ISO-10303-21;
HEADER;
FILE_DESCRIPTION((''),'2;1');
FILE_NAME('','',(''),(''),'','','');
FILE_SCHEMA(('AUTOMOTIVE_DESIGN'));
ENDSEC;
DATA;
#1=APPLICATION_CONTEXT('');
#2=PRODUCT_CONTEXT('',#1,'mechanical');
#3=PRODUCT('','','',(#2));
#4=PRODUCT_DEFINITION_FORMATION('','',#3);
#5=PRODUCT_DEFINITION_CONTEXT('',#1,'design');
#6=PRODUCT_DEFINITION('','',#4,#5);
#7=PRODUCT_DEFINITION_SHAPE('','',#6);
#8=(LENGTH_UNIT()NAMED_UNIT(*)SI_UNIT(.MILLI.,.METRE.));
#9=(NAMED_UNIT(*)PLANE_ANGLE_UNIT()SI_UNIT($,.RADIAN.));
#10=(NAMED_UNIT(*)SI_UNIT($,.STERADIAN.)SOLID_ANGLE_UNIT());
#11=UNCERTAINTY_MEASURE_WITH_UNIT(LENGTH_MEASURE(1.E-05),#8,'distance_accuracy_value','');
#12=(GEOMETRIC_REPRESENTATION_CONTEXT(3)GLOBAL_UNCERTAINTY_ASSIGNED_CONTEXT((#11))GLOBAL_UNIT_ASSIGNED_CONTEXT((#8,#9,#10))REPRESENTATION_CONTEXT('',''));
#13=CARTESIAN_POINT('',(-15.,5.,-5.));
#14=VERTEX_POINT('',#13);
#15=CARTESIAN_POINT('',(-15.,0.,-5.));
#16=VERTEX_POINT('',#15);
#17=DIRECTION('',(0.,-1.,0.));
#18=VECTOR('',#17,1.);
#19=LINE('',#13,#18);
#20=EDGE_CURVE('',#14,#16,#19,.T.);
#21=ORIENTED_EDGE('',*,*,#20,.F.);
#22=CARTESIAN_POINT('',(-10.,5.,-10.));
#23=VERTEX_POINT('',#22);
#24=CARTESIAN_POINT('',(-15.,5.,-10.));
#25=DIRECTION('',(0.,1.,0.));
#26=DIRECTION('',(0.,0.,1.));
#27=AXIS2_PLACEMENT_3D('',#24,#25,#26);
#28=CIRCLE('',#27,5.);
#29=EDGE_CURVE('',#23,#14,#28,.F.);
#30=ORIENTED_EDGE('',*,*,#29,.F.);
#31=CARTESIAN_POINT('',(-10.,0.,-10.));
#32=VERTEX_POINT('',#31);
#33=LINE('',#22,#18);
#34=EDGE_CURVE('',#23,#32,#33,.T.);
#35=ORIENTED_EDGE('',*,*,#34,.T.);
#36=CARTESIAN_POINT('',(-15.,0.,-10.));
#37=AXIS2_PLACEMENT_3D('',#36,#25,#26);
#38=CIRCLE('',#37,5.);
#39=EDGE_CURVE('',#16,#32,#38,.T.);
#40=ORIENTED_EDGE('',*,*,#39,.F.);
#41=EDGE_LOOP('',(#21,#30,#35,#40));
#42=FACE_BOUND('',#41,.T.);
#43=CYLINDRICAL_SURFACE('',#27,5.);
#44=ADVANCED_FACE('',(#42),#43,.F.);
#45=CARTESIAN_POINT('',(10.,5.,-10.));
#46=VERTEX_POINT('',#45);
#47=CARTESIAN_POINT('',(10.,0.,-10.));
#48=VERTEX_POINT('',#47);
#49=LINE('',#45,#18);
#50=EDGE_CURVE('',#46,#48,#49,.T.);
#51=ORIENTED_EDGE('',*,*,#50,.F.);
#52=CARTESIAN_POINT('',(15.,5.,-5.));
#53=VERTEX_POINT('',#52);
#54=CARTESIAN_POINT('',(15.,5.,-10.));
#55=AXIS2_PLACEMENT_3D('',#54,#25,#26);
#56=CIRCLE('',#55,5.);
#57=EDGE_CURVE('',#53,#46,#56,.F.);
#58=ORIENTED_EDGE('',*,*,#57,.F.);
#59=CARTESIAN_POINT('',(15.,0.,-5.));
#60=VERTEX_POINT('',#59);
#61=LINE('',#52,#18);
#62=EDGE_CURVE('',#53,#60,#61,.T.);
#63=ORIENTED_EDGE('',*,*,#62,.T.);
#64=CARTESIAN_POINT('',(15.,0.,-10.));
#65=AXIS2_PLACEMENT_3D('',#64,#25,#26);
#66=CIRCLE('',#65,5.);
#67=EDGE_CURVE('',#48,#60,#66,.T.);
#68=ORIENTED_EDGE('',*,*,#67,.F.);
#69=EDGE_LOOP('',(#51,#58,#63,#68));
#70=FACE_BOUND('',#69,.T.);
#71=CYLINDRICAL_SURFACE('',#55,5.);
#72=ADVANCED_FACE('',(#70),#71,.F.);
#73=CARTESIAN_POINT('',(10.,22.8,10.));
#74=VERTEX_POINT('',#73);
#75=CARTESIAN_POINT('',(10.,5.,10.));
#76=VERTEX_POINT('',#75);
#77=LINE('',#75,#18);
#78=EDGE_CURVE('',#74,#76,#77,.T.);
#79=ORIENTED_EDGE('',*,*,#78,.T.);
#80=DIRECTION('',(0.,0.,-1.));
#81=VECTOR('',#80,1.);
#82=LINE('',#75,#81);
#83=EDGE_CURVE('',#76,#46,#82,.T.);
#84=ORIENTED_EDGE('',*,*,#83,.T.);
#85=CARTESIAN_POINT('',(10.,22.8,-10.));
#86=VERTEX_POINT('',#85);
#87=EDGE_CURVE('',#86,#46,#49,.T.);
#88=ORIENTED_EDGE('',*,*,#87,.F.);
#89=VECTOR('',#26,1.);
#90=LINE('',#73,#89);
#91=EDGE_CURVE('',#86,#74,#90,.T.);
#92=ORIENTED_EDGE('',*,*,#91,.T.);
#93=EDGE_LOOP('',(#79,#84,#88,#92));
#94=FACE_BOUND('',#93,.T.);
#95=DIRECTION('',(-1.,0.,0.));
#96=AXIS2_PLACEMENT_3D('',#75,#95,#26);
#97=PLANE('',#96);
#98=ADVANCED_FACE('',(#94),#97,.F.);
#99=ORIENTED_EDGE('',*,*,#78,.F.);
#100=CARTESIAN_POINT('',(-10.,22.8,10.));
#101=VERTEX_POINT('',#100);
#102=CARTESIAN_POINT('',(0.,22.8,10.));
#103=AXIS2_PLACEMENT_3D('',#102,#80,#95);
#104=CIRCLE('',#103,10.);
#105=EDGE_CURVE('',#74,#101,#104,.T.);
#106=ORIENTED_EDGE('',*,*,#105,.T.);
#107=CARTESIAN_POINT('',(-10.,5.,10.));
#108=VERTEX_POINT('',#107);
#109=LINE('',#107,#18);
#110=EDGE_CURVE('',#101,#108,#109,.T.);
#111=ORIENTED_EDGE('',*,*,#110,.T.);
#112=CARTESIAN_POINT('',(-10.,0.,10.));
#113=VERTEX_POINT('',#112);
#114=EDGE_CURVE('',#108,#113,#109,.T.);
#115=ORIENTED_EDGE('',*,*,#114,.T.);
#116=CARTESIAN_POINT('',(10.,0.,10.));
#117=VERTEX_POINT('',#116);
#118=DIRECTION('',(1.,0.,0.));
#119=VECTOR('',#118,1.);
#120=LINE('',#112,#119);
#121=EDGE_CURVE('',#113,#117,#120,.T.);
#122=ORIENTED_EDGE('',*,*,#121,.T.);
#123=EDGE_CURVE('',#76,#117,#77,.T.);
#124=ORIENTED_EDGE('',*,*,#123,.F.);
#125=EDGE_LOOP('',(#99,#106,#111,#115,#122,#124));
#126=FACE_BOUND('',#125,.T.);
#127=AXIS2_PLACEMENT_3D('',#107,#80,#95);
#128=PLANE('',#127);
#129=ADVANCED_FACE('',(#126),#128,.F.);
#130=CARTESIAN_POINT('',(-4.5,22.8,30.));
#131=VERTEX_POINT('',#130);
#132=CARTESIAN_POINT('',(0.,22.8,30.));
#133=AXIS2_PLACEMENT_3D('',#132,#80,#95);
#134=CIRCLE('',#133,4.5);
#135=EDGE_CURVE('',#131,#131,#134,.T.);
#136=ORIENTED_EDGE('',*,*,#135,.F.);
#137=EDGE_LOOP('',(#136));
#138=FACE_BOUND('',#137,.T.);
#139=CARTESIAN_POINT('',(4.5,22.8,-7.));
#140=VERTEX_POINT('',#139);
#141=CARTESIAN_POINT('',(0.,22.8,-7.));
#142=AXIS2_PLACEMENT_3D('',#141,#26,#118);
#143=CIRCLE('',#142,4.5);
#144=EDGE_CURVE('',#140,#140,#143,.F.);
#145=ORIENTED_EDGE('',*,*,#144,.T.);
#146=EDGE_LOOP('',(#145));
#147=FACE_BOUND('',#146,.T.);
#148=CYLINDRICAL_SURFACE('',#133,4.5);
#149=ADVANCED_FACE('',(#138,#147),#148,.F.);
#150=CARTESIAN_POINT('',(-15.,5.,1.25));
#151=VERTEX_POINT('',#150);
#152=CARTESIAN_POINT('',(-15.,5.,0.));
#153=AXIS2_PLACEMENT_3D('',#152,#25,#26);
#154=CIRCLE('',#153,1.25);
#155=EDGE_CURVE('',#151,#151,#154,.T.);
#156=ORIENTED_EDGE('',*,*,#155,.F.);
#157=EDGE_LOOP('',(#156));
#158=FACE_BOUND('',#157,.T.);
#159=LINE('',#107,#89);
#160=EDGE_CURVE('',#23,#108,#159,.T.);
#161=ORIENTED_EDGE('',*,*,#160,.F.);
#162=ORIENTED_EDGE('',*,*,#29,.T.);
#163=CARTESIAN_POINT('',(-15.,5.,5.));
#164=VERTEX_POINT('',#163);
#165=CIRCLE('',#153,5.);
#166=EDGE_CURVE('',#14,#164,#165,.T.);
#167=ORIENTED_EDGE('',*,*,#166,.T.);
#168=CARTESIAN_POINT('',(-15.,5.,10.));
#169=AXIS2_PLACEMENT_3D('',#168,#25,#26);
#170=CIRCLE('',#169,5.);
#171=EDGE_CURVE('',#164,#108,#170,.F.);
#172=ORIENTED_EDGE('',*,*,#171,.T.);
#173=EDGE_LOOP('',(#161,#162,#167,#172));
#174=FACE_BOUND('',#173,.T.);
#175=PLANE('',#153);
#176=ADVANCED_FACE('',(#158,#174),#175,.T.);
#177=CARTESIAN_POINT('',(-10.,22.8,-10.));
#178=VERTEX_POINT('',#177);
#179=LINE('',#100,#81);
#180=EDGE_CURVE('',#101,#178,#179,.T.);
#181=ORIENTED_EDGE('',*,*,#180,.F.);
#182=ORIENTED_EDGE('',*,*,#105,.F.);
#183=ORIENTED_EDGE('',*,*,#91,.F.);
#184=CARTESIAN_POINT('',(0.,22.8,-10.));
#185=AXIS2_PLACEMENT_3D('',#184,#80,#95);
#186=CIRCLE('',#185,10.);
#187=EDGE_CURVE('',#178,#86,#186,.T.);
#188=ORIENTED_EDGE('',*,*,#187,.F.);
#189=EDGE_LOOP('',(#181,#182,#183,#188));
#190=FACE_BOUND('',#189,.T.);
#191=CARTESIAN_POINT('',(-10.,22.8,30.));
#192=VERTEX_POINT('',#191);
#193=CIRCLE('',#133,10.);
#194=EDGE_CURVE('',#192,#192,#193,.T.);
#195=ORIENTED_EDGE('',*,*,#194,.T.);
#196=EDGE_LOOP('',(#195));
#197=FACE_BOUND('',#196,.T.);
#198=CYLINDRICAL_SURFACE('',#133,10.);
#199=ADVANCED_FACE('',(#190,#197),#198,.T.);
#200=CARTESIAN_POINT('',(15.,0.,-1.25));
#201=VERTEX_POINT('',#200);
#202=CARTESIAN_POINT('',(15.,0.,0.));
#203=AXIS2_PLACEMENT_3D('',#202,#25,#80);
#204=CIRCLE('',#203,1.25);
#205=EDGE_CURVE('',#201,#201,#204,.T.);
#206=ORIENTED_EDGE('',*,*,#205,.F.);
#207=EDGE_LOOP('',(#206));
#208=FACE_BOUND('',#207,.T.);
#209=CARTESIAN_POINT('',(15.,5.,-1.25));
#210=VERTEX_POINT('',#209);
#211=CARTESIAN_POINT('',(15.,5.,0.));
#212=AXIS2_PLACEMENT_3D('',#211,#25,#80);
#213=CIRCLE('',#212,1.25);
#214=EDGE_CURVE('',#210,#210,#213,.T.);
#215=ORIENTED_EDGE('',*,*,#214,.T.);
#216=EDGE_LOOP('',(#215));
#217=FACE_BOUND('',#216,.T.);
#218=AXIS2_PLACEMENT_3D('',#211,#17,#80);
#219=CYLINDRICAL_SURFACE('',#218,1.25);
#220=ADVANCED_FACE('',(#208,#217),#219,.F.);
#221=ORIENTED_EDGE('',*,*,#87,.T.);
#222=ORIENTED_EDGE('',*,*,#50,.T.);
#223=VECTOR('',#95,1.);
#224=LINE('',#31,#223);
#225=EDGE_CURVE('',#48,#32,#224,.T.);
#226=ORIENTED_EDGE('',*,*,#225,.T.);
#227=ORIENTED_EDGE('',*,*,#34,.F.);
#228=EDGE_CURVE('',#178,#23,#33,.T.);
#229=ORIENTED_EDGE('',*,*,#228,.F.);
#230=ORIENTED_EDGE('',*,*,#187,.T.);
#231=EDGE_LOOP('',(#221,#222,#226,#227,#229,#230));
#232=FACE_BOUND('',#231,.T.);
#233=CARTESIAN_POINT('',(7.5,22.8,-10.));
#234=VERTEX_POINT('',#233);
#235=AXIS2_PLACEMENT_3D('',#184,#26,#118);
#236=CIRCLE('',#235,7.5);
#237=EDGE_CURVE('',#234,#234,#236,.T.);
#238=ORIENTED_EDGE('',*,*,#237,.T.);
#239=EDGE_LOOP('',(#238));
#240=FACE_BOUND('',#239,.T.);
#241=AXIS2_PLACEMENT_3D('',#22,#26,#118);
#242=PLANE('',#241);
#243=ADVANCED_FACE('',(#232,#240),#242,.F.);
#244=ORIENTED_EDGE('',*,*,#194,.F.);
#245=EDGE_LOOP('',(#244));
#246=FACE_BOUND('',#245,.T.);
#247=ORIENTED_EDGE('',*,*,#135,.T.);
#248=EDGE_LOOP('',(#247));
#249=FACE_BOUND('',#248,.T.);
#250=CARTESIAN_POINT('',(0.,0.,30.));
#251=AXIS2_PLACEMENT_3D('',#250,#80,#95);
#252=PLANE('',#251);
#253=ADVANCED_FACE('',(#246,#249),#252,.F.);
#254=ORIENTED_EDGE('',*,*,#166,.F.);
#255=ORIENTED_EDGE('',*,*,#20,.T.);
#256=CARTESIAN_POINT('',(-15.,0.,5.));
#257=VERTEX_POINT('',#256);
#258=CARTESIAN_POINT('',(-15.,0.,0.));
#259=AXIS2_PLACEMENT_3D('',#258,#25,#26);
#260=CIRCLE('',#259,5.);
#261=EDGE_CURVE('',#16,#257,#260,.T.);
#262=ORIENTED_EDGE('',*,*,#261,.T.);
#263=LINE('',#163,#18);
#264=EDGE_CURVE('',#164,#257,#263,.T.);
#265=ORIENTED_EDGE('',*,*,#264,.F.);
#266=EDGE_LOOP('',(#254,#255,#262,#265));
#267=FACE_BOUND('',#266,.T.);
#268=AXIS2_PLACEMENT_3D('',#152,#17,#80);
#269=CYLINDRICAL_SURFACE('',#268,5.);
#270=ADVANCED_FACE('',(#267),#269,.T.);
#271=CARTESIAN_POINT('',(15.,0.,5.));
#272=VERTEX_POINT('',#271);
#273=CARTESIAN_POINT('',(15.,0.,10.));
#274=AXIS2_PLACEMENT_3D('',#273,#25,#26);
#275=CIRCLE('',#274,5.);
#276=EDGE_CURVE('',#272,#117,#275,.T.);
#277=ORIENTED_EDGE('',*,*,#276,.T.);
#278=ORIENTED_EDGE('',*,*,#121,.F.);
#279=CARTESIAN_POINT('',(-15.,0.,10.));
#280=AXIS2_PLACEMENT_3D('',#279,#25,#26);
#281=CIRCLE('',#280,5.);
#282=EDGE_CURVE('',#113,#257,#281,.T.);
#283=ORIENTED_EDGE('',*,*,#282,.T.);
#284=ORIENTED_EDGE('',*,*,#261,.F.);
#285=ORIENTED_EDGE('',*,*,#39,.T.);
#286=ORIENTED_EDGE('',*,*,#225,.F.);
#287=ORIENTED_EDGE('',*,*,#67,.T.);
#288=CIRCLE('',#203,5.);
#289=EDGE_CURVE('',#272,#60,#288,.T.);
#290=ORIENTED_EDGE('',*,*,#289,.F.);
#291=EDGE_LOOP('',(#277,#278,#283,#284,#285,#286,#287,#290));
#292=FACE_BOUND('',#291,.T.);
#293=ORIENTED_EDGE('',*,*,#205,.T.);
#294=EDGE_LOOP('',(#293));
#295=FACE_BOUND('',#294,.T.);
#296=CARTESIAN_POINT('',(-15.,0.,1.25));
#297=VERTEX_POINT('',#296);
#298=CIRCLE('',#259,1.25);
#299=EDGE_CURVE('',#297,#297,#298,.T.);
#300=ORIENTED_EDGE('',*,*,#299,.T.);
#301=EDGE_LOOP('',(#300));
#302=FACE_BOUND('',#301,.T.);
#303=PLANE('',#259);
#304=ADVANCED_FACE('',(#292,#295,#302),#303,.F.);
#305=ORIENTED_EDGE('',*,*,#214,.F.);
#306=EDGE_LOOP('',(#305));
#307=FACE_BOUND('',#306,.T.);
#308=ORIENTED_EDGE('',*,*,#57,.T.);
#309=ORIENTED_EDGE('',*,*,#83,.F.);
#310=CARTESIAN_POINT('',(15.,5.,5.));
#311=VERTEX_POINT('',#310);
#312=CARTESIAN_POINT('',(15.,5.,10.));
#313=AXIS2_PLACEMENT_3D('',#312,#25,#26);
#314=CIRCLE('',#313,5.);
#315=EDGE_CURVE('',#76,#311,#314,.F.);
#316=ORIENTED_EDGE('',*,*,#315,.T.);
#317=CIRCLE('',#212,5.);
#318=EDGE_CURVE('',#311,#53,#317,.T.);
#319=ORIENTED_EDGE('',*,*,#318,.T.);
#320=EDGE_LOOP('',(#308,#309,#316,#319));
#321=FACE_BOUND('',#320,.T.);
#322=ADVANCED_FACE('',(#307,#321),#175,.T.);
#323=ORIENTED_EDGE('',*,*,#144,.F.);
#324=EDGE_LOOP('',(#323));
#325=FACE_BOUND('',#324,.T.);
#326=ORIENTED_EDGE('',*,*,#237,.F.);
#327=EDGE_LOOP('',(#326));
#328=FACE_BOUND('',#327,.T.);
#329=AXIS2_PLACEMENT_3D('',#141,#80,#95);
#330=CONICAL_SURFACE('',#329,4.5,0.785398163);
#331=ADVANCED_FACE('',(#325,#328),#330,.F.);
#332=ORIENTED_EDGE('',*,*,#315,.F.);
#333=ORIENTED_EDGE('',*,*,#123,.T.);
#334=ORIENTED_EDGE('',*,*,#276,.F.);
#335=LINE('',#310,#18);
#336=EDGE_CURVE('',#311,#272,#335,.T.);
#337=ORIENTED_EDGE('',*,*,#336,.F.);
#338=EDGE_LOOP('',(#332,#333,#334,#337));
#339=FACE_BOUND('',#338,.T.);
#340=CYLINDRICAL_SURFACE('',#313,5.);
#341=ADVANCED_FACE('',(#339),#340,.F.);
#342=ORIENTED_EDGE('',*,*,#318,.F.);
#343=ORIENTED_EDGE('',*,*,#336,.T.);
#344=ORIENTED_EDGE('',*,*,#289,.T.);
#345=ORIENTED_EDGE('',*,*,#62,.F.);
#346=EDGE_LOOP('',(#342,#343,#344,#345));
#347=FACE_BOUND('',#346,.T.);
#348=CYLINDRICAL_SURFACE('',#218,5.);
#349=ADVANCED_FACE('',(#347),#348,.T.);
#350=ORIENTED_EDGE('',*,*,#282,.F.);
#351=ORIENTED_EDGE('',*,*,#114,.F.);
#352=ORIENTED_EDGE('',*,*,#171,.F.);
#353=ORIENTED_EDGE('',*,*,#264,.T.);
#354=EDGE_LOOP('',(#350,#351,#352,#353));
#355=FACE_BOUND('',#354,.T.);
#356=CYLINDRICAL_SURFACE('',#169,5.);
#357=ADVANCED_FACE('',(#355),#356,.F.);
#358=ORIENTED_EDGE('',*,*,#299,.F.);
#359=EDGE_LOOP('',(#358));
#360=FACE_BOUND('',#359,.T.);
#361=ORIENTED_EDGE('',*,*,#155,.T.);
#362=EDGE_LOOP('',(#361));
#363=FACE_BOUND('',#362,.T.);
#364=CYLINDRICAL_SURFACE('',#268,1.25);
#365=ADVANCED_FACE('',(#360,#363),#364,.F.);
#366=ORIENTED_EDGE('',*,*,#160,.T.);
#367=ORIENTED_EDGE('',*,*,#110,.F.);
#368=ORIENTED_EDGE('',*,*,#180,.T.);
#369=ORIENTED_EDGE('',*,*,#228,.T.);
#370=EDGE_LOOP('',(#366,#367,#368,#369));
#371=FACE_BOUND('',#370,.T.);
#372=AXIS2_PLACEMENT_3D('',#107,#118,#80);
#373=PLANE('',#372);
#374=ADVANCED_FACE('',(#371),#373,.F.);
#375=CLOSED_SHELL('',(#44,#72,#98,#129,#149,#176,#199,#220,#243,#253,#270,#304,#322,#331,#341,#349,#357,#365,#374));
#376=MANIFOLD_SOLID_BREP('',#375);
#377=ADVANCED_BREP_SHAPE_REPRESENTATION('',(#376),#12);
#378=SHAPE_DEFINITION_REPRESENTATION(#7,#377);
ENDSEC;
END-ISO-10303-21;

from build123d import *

# Parameters (mm, degrees)
SKETCH1_R           = 1.25
BOSS_EXTRUDE1_DEPTH = 5
SKETCH2_W           = 20
SKETCH2_H           = 20
BOSS_EXTRUDE2_DEPTH = 17.8
SKETCH3_R           = 10
BOSS_EXTRUDE3_DEPTH = 40
CUT_EXTRUDE1_DEPTH  = 56.46025604
FILLET1_R           = 5
CHAMFER2_SIZE       = 3


with BuildPart() as part:
    # Sketch1 → Boss-Extrude1 (new body)
    with BuildSketch(Plane(origin=(0, 0, 0), x_dir=(1, 0, 0), z_dir=(0, 1, 0))):
        with BuildLine():
            Line((-10, -10), (10, -10))
            Line((10, -10), (10, -5))
            Line((10, -5), (15, -5))
            ThreePointArc((15, -5), (20, 0), (15, 5))
            Line((15, 5), (10, 5))
            Line((10, 5), (10, 10))
            Line((10, 10), (-10, 10))
            Line((-10, 10), (-10, 5))
            Line((-10, 5), (-15, 5))
            ThreePointArc((-15, 5), (-20, 0), (-15, -5))
            Line((-15, -5), (-10, -5))
            Line((-10, -5), (-10, -10))
        make_face()
        with Locations(Location((-15, 0, 0), (0, 0, 270))):
            Circle(SKETCH1_R, mode=Mode.SUBTRACT)
        with Locations(Location((15, 0, 0), (0, 0, 90))):
            Circle(SKETCH1_R, mode=Mode.SUBTRACT)
    extrude(amount=BOSS_EXTRUDE1_DEPTH)

    # Sketch2 → Boss-Extrude2 (add)
    with BuildSketch(Plane(origin=(0, 5, 0), x_dir=(1, 0, 0), z_dir=(0, 1, 0))):
        Rectangle(SKETCH2_W, SKETCH2_H)
    extrude(amount=BOSS_EXTRUDE2_DEPTH)

    # Sketch3 → Boss-Extrude3 (add)
    with BuildSketch(Plane(origin=(0, 0, -10), x_dir=(-1, 0, 0), z_dir=(0, 0, -1))):
        with Locations((0, 22.8)):
            Circle(SKETCH3_R)
    extrude(amount=-BOSS_EXTRUDE3_DEPTH)

    # Sketch3<3> → Cut-Extrude1 (cut, through all)
    with BuildSketch(Plane(origin=(0, 0, -10), x_dir=(-1, 0, 0), z_dir=(0, 0, -1))):
        with BuildLine():
            Line((-4.5, 22.8), (4.5, 22.8))
            ThreePointArc((4.5, 22.8), (0, 27.3), (-4.5, 22.8))
        make_face()
        with BuildLine():
            ThreePointArc((-4.5, 22.8), (0, 18.3), (4.5, 22.8))
            Line((4.5, 22.8), (-4.5, 22.8))
        make_face()
    extrude(amount=-CUT_EXTRUDE1_DEPTH, mode=Mode.SUBTRACT)

    # Fillet1
    fillet1_edges = [part.edges().sort_by_distance(p)[0] for p in [
        (10, 2.5, -5),
        (10, 2.5, 5),
        (-10, 2.5, 5),
        (-10, 2.5, -5),
    ]]
    fillet(fillet1_edges, radius=FILLET1_R - 0.0001)  # a hair under: the kernel refuses the full size

    # Chamfer2
    chamfer2_edges = [part.edges().sort_by_distance(p)[0] for p in [
        (4.5, 22.8, -10),
    ]]
    chamfer(chamfer2_edges, length=CHAMFER2_SIZE)


solid = part.part
